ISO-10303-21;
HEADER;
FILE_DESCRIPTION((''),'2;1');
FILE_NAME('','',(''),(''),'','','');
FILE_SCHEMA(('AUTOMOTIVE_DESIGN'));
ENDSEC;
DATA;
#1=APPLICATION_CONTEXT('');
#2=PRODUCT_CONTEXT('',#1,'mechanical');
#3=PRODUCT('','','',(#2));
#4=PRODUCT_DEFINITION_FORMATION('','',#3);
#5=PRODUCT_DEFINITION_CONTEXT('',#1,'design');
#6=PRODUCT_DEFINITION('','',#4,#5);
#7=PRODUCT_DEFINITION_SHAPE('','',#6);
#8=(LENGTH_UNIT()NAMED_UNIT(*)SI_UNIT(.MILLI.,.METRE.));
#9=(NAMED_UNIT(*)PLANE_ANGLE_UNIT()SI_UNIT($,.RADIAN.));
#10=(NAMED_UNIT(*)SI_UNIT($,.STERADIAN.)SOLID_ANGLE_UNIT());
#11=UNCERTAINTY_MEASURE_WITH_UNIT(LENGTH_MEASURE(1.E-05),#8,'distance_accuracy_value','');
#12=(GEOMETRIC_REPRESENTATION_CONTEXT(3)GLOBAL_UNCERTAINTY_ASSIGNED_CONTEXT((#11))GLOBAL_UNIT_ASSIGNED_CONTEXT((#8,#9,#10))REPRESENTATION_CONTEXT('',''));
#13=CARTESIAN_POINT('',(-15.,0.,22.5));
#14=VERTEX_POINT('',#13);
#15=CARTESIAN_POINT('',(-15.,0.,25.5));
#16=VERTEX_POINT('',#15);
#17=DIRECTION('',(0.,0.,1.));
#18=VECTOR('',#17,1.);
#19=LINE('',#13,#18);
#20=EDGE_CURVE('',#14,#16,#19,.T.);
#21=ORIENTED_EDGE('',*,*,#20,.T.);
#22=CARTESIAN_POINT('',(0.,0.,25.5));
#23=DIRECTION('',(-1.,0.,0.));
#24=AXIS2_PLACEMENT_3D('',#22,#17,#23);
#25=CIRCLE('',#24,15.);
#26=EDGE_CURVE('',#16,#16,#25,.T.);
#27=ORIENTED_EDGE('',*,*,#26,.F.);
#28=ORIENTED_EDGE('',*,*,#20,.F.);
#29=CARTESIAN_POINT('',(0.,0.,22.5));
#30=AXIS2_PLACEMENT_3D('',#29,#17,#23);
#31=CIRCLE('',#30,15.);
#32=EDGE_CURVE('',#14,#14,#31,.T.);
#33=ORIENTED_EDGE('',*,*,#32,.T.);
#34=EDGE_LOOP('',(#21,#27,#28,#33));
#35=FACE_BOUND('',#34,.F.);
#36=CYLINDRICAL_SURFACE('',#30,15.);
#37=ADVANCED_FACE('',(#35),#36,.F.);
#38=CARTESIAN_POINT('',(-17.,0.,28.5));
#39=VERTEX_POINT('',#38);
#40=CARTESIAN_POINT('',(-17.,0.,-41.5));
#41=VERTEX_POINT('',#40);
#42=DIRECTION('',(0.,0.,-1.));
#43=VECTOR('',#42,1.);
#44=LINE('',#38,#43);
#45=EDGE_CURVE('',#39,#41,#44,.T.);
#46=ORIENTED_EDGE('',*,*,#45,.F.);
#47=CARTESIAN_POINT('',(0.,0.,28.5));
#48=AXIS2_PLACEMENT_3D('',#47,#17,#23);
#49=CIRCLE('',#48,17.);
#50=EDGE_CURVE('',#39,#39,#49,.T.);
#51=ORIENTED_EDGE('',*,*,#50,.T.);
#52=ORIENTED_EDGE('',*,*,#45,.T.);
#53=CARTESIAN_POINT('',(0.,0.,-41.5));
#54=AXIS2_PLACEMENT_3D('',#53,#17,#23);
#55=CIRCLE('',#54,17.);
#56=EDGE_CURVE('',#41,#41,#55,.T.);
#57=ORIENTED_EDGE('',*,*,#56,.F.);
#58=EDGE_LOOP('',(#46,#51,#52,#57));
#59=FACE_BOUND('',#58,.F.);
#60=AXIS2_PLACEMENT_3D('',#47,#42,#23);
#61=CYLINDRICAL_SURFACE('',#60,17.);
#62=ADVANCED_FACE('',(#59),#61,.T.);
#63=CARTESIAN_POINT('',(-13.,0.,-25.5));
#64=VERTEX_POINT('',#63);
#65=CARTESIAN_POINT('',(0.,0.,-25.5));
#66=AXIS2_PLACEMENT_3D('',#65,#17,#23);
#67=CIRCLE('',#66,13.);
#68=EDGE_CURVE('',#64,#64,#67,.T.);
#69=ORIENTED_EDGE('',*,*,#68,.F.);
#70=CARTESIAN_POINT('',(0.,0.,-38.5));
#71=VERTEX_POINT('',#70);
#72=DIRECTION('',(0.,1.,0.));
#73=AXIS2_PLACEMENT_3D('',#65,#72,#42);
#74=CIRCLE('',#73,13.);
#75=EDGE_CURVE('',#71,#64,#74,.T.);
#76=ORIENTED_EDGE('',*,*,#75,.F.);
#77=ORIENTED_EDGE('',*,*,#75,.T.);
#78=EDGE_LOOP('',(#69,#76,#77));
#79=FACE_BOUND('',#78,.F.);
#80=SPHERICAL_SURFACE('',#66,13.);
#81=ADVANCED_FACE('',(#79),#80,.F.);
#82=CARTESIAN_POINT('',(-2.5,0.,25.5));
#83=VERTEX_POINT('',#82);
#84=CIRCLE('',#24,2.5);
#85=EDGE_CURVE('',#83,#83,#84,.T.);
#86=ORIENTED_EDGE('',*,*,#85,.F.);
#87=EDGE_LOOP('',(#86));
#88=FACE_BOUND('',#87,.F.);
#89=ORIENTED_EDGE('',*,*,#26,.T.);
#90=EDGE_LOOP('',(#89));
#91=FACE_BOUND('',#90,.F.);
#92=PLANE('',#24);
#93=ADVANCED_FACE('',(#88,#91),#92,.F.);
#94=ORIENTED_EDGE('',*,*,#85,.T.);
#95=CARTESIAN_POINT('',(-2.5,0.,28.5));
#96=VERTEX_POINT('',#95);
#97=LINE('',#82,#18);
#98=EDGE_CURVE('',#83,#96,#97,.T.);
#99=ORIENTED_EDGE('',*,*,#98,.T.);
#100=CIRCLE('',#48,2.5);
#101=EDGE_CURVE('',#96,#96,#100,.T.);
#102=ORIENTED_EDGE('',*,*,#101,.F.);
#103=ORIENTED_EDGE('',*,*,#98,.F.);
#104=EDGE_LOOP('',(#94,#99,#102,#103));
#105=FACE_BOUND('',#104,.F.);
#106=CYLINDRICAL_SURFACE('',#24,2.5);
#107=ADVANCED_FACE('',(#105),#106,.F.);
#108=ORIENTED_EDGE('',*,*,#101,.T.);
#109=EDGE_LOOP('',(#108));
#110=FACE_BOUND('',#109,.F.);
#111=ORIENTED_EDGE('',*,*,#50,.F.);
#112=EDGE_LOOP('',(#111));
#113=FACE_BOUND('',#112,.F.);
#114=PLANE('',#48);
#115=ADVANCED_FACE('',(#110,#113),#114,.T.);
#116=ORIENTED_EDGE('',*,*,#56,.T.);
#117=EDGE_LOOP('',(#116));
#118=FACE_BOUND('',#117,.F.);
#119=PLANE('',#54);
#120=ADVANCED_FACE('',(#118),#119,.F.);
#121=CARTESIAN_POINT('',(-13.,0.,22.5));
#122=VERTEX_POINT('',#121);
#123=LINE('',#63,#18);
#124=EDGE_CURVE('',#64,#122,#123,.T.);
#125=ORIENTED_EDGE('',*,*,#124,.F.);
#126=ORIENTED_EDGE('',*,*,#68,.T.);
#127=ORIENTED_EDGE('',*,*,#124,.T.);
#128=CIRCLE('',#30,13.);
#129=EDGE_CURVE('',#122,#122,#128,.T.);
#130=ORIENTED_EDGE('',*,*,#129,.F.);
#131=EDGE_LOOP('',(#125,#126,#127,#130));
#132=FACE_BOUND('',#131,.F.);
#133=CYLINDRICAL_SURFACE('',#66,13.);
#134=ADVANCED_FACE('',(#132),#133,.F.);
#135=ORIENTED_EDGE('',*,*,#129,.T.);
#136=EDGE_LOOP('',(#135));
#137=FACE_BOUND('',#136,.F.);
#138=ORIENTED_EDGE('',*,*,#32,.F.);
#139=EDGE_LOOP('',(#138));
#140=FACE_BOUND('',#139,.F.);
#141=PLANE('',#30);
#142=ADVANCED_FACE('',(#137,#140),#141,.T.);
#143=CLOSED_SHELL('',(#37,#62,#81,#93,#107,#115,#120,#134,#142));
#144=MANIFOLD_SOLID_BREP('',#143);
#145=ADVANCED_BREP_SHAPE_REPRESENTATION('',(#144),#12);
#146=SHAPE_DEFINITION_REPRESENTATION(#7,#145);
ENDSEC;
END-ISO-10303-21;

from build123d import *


# Not quite as in the source:
# - a feature names something its author has since deleted; it is built from what else it names


with BuildPart() as f1:
    # F0 (on Front) → F1 (revolve)
    with BuildSketch(Plane.XZ):
        with BuildLine():
            Line((-15, 25.5), (-13, 25.5))
            Line((-13, 25.5), (-2.5, 25.5))
            Line((-2.5, 25.5), (-2.5, 28.5))
            Line((-2.5, 28.5), (-17, 28.5))
            Line((-17, 28.5), (-17, -41.5))
            Line((-17, -41.5), (0, -41.5))
            Line((0, -41.5), (0, -38.5))
            ThreePointArc((0, -38.5), (-9.1923881554, -34.6923881554), (-13, -25.5))
            Line((-13, -25.5), (-13, 22.5))
            Line((-13, 22.5), (-15, 22.5))
            Line((-15, 22.5), (-15, 25.5))
        make_face()
    revolve(axis=Axis((0, 0, -33.5), (0, 0, 1)))


solid = f1.part
